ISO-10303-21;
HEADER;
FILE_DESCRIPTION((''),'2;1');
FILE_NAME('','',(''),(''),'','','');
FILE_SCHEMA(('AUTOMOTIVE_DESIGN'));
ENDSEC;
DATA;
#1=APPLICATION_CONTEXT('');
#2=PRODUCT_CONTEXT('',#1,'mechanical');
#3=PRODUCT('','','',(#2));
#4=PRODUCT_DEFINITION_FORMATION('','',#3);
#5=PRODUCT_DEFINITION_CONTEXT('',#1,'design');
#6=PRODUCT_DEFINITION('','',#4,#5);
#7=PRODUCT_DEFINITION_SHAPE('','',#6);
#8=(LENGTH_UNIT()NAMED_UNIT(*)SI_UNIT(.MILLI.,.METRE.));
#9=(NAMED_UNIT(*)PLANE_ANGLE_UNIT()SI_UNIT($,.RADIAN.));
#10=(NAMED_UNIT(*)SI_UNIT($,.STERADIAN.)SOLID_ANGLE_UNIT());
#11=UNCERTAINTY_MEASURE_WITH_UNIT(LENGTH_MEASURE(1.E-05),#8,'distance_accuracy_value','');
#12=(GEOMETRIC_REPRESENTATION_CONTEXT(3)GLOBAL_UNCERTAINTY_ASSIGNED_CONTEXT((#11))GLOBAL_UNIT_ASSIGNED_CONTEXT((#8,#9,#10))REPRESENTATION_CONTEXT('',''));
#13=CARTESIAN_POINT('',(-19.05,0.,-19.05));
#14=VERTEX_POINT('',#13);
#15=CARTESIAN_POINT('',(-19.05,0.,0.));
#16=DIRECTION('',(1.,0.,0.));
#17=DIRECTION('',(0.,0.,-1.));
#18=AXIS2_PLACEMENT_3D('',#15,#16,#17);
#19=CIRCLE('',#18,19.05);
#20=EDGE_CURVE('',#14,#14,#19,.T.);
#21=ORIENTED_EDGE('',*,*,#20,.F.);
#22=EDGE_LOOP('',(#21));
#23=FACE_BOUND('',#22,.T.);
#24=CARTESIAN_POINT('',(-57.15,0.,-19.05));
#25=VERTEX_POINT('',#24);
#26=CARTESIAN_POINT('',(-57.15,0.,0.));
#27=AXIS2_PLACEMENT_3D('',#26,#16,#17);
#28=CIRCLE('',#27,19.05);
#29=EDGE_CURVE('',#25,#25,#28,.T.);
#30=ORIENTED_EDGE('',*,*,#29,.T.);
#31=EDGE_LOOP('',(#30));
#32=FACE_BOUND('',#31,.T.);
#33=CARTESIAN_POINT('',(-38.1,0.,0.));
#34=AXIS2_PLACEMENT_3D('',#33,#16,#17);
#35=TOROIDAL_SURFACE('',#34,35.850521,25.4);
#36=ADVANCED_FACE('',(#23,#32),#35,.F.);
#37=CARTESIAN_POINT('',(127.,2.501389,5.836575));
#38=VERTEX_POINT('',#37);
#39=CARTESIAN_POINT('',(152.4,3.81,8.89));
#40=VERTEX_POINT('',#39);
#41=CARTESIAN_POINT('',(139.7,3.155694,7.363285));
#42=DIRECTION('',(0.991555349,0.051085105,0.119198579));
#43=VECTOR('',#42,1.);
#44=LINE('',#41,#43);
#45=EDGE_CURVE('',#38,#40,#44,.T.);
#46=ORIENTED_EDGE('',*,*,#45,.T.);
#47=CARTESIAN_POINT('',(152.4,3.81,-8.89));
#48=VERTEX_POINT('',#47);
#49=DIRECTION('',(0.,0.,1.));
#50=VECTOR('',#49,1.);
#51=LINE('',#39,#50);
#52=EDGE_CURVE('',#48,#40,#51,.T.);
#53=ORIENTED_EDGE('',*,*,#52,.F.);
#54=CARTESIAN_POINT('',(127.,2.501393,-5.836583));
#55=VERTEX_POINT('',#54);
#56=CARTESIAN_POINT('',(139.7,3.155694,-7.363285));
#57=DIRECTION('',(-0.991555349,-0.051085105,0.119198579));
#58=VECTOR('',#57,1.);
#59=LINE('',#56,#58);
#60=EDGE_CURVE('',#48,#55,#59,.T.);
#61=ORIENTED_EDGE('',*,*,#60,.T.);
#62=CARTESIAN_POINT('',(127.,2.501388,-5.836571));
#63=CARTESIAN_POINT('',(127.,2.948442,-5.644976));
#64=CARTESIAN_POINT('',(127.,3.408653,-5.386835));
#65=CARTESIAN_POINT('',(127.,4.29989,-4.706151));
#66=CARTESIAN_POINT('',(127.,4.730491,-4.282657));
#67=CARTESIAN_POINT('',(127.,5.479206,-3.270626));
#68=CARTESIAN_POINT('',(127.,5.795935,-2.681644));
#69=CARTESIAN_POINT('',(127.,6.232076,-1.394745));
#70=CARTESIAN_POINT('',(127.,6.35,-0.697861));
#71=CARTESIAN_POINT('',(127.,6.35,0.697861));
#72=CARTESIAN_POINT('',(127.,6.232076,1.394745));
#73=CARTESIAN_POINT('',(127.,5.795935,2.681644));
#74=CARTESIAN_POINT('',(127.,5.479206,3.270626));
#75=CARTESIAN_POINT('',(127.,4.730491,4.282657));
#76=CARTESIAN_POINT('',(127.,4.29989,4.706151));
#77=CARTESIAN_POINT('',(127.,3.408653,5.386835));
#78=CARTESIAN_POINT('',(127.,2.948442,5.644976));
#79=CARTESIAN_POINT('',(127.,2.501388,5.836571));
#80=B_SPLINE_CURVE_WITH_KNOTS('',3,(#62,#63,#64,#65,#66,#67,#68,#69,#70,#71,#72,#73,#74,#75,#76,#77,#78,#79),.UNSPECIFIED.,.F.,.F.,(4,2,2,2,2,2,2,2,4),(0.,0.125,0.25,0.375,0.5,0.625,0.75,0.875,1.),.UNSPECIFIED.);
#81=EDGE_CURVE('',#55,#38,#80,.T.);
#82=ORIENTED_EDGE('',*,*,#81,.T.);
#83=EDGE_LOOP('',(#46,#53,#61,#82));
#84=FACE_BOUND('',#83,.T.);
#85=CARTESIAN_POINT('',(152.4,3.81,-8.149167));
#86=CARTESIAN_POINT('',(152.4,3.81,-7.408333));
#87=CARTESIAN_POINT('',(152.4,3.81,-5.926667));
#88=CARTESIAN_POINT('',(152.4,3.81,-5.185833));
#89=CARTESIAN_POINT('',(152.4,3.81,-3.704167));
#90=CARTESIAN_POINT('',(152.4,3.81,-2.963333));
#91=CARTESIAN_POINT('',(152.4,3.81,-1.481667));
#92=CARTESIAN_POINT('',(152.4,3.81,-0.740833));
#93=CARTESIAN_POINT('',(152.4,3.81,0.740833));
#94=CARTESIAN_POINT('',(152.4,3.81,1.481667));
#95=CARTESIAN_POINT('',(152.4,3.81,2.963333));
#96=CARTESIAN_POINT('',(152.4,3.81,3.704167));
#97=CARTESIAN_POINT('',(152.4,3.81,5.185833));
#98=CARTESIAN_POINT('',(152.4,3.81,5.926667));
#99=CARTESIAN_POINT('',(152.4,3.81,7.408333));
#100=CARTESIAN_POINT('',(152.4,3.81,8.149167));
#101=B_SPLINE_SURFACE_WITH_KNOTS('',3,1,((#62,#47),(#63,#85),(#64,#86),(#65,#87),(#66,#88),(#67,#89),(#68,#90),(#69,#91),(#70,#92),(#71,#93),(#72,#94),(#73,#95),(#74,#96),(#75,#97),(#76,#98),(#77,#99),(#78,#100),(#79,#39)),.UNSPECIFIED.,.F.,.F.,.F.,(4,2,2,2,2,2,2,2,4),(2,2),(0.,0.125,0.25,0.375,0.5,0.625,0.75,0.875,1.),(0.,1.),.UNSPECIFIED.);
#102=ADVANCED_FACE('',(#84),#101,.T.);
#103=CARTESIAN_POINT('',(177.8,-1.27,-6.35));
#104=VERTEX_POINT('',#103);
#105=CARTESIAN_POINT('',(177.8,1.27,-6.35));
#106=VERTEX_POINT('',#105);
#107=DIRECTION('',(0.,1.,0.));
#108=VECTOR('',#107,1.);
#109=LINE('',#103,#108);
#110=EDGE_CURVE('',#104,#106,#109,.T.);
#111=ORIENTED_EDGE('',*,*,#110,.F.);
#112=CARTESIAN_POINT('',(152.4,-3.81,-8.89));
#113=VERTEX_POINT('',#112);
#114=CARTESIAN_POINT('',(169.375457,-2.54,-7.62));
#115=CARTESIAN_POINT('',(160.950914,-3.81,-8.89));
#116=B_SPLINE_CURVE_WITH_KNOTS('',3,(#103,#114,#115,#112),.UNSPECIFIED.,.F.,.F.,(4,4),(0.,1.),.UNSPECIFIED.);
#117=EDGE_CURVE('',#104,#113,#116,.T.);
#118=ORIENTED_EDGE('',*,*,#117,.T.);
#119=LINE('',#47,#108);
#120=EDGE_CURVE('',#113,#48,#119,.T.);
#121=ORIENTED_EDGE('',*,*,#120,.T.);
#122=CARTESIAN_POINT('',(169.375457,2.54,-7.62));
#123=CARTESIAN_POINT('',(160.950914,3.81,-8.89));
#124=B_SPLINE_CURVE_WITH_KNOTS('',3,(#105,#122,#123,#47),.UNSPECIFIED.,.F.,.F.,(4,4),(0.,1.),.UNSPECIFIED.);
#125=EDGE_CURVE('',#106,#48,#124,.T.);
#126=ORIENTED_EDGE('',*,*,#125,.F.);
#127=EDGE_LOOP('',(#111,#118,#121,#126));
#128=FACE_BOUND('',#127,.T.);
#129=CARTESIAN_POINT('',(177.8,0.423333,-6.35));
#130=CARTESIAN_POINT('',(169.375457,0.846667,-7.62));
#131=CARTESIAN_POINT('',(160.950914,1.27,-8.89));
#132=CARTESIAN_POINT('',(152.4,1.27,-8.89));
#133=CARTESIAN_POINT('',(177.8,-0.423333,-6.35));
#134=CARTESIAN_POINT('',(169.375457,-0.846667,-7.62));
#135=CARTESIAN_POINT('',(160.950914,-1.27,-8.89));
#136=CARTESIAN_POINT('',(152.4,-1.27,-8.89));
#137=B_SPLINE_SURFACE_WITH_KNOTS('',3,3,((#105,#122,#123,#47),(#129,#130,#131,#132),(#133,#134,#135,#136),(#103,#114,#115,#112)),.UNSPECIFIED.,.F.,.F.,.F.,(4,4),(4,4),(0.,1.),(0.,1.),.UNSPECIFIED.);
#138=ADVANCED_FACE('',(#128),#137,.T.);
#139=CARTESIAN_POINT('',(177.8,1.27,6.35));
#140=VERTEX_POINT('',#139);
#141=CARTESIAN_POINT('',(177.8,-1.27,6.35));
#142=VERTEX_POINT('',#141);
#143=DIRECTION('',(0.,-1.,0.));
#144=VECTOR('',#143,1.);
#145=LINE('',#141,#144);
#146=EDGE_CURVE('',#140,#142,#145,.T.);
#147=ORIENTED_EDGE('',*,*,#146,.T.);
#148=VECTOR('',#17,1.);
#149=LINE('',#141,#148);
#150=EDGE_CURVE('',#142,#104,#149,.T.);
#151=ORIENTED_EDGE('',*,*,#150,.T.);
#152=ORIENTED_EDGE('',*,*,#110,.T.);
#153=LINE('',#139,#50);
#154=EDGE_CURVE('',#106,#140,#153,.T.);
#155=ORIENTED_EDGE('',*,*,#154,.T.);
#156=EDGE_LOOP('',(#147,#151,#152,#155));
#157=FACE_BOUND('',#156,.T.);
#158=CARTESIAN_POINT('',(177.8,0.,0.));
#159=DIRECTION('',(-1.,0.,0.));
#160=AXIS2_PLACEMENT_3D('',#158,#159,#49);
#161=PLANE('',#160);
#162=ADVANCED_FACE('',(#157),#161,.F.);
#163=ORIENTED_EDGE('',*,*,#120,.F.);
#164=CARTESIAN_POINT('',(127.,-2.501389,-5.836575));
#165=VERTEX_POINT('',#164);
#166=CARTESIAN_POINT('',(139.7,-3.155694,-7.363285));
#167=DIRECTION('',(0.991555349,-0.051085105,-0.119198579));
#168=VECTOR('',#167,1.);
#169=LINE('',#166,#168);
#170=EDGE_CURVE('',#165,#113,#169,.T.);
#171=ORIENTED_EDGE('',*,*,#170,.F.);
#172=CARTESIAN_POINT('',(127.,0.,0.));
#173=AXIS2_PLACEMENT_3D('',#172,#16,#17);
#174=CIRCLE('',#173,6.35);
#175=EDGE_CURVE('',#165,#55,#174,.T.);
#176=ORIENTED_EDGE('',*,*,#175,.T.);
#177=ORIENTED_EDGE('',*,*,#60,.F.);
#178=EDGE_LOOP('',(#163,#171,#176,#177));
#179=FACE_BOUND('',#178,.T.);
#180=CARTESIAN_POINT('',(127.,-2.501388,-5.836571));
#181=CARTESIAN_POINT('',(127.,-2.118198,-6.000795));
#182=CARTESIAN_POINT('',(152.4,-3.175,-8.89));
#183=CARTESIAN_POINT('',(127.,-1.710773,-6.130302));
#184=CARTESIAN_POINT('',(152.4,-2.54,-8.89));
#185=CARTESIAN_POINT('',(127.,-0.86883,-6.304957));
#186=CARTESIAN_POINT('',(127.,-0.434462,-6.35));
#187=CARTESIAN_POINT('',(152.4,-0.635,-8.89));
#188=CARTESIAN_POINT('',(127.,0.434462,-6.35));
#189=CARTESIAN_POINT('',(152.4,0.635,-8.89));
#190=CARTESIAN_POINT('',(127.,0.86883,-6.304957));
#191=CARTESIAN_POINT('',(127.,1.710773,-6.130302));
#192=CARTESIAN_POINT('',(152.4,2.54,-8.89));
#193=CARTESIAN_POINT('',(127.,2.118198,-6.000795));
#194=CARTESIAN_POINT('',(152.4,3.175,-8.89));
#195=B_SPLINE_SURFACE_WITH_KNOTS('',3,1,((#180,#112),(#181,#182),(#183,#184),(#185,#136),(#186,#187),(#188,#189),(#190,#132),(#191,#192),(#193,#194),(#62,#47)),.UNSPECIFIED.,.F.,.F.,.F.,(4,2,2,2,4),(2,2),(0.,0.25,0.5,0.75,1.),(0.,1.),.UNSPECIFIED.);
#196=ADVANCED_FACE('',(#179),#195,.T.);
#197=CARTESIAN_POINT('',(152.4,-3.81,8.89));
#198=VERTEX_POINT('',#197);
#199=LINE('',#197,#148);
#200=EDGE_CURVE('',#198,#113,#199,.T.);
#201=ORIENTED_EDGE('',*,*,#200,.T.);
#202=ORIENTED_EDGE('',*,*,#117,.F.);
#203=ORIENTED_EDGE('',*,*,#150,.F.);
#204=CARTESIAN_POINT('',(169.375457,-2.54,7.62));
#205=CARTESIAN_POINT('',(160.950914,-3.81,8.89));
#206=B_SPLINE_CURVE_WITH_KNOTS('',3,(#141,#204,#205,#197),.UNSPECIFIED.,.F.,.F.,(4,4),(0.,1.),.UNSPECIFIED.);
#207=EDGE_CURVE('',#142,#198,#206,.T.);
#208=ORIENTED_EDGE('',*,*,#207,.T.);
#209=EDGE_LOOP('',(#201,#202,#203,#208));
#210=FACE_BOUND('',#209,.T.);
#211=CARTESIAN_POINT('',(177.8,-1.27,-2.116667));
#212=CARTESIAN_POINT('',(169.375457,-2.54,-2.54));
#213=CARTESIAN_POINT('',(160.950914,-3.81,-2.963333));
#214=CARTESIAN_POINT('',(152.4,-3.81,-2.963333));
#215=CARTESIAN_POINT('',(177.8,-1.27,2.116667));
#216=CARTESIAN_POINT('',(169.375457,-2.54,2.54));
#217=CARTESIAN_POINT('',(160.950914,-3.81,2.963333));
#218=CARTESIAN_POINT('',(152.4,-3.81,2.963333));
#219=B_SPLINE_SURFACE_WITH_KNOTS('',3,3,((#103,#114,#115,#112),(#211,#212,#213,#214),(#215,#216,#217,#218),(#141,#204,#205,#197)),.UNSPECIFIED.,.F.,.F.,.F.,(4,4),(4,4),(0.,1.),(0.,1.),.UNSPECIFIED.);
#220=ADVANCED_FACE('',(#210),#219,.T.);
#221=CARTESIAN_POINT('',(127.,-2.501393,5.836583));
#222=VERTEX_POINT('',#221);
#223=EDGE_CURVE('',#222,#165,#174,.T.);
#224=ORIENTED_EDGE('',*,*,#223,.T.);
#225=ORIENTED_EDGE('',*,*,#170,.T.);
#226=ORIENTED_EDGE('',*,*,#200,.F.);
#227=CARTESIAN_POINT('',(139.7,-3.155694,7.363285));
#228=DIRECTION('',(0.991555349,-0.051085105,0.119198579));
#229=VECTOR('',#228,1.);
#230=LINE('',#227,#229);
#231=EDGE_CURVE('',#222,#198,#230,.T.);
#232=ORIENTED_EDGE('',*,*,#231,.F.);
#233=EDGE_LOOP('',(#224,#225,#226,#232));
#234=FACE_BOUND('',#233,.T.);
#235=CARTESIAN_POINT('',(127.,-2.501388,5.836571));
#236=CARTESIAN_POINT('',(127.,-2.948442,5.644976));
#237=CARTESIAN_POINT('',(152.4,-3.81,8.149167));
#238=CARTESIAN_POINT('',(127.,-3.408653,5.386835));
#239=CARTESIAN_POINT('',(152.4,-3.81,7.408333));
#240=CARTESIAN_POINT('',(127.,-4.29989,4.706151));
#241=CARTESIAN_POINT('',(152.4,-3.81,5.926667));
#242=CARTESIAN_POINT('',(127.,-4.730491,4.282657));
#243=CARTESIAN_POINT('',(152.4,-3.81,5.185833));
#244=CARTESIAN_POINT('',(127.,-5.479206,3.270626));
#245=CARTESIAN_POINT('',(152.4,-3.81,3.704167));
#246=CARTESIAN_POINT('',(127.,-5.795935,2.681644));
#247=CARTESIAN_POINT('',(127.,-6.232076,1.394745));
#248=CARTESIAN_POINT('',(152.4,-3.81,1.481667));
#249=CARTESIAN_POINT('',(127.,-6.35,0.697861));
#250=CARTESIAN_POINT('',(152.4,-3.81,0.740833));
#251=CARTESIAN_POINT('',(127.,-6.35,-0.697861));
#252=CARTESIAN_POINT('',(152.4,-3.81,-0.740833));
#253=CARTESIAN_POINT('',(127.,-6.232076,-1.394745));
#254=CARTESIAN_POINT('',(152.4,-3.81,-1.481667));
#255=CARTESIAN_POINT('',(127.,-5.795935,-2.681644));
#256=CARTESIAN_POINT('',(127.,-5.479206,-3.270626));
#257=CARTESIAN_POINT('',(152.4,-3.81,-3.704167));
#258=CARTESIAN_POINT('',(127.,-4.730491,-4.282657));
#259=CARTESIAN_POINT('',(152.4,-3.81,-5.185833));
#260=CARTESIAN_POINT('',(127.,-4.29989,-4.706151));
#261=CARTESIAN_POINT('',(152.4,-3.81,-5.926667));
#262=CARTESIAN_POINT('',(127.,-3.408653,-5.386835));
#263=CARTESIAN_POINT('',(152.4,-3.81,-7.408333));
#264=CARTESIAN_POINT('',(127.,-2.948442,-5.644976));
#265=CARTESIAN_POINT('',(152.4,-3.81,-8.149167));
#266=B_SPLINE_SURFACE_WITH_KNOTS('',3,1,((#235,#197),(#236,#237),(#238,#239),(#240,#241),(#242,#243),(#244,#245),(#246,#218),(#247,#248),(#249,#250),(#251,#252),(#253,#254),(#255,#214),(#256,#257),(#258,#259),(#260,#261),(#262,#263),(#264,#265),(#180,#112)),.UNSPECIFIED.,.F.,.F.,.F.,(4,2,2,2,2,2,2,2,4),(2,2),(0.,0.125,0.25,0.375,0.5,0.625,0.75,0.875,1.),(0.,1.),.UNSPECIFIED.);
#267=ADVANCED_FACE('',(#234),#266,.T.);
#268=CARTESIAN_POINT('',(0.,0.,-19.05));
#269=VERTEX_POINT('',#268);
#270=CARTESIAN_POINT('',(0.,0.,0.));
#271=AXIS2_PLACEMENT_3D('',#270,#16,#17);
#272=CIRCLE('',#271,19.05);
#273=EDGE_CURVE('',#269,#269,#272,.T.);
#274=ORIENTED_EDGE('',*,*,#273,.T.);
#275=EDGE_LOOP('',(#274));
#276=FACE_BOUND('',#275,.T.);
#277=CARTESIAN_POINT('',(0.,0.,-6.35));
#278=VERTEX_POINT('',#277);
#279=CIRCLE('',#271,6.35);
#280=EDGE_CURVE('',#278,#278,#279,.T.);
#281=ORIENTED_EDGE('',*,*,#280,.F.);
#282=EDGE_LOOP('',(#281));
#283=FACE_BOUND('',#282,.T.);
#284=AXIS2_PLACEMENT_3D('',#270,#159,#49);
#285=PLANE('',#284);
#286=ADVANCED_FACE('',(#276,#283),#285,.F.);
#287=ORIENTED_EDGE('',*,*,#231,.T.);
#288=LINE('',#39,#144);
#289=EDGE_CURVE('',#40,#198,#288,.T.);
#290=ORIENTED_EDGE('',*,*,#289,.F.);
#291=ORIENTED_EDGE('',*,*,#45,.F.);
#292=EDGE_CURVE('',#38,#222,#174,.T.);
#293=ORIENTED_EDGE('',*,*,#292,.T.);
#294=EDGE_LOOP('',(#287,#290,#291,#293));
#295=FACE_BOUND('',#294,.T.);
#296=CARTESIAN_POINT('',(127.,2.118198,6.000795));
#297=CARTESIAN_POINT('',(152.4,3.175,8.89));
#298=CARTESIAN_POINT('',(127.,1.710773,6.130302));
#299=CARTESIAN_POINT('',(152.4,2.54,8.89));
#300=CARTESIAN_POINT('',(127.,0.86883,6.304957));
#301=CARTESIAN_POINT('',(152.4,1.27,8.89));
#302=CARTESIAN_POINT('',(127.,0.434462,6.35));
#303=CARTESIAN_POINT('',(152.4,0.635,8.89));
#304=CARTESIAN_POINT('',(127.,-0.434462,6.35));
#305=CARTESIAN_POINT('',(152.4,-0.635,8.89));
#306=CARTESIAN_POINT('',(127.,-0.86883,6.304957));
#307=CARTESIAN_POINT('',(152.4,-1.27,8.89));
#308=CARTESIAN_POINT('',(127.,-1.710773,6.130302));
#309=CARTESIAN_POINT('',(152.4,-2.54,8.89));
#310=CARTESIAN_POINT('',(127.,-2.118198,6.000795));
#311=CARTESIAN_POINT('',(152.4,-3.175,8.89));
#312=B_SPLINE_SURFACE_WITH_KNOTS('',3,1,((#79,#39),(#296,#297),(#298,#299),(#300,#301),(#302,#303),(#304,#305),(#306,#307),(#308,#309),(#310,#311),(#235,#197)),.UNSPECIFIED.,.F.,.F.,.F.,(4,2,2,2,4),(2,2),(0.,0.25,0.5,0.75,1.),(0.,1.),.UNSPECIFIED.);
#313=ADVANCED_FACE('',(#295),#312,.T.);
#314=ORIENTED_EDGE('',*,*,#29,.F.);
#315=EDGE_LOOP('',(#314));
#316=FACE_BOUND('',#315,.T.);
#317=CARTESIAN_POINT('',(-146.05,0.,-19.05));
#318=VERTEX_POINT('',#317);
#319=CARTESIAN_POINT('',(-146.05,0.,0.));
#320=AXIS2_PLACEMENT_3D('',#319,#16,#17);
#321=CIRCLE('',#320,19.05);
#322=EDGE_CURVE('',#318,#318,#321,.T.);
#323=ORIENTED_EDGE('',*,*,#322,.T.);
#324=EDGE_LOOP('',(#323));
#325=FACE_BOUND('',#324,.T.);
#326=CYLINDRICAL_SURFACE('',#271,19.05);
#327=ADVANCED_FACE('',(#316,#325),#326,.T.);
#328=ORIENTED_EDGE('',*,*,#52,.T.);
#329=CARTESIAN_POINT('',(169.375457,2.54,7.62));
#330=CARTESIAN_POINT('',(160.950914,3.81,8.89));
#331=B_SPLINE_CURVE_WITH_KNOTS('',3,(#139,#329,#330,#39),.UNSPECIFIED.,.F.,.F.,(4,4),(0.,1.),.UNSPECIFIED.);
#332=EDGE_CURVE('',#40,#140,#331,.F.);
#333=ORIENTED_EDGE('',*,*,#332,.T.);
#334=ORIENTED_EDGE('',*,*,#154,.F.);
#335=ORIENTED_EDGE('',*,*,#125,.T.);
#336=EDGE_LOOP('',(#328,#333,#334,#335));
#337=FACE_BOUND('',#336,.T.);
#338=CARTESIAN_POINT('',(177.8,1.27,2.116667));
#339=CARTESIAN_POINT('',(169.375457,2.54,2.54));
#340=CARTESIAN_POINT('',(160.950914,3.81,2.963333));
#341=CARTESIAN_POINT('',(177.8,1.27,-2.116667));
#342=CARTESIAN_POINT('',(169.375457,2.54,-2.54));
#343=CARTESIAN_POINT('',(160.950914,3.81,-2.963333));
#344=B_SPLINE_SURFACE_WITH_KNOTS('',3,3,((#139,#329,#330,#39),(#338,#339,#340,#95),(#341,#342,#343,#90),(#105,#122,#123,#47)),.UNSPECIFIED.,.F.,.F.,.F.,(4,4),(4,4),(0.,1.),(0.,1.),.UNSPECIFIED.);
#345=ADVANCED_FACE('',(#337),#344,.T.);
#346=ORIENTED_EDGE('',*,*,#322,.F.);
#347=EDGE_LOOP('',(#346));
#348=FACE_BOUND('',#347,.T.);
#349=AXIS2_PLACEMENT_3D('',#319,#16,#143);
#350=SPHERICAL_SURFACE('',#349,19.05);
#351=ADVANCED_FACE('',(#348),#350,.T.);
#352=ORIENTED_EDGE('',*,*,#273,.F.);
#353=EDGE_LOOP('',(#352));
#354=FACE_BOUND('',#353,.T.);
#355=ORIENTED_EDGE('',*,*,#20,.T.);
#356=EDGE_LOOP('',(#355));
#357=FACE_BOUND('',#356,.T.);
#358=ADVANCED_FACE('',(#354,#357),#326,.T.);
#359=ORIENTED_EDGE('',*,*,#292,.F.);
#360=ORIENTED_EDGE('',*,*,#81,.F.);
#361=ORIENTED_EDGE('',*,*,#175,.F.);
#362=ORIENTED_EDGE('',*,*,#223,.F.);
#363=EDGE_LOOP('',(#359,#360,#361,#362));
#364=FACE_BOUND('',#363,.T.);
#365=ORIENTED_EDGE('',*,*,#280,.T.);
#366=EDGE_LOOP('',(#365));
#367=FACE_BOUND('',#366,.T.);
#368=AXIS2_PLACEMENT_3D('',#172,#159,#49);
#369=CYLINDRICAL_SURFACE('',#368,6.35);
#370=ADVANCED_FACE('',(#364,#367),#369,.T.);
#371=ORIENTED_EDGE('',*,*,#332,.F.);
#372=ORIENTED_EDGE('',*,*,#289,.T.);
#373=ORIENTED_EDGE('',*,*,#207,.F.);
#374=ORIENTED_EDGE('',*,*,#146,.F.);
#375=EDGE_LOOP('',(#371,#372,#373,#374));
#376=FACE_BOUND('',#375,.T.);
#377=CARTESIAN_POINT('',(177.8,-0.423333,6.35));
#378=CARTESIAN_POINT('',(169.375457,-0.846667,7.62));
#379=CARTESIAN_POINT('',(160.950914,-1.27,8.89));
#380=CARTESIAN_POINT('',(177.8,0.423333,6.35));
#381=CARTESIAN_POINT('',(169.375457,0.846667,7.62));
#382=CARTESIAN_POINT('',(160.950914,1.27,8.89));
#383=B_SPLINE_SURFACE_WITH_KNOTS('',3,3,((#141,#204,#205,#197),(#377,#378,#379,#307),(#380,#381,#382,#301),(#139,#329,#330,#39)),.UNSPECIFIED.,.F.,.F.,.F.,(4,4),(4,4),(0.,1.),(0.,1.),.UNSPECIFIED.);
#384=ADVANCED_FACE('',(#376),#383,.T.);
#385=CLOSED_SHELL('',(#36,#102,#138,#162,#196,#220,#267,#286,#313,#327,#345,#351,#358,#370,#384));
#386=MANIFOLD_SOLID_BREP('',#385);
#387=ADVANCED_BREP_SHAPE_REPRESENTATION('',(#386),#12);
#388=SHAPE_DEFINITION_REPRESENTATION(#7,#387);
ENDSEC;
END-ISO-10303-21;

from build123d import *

# Parameters (mm, degrees)
SKETCH6_R           = 6.35
BOSS_EXTRUDE1_DEPTH = 127
LOFT6_START         = -6.35
LOFT6_DEPTH         = 12.6999999
LOFT6_START_2       = -3.8100001
LOFT6_2_DEPTH       = 7.6200001
LOFT6_START_3       = -10
LOFT6_3_DEPTH       = 20


with BuildPart() as part:
    # Sketch3 → Revolve2 (revolve)
    with BuildSketch(Plane(origin=(0, 0, 0), x_dir=(0, 1, 0), z_dir=(0, 0, 1)), mode=Mode.PRIVATE) as revolve2_sk:
        with BuildLine():
            ThreePointArc((19.05, 57.15), (10.450520825, 38.1), (19.05, 19.05))
            Line((19.05, 19.05), (19.05, 0))
            Line((19.05, 0), (0, 0))
            Line((0, 0), (0, 165.1))
            ThreePointArc((0, 165.1), (13.470384182, 159.520384182), (19.05, 146.05))
            Line((19.05, 146.05), (19.05, 57.15))
        make_face()
    revolve(revolve2_sk.sketch.rotate(Axis((0, 0, 0), (-1, 0, 0)), 90), axis=Axis((0, 0, 0), (-1, 0, 0)))

    # Sketch6 → Boss-Extrude1 (add)
    with BuildSketch(Plane.YZ):
        with Locations(Location((0, 0, 0), (0, 0, 270))):
            Circle(SKETCH6_R)
    extrude(amount=BOSS_EXTRUDE1_DEPTH)

    # Sketch7 for Loft5 → Loft5 section 0
    with BuildSketch(Plane(origin=(127, 0, 0), x_dir=(0, 0, -1), z_dir=(1, 0, 0))):
        with BuildLine():
            # circular arc as an exact rational Bezier (weights 1, cos(half-angle), 1)
            Bezier((-5.836570941, 2.501387546), (0, 16.120053073), (5.836570941, 2.501387546), weights=[1, 0.393919299, 1])
            Bezier((5.836570941, 2.501387546), (6.908594174, 0), (5.836570941, -2.501387546), weights=[1, 0.91914503, 1])
            Bezier((5.836570941, -2.501387546), (0, -16.120053073), (-5.836570941, -2.501387546), weights=[1, 0.393919299, 1])
            Bezier((-5.836570941, -2.501387546), (-6.908594174, 0), (-5.836570941, 2.501387546), weights=[1, 0.91914503, 1])
        make_face()
    # Sketch4 → Loft5 section 1
    with BuildSketch(Plane(origin=(152.4, 0, 0), x_dir=(0, 0, -1), z_dir=(1, 0, 0))):
        with BuildLine():
            Line((-8.89, 3.81), (8.89, 3.81))
            Line((8.89, 3.81), (8.89, -3.81))
            Line((8.89, -3.81), (-8.89, -3.81))
            Line((-8.89, -3.81), (-8.89, 3.81))
        make_face()
    loft()

    # Loft6: read off the stored shape, not the designer's step
    # Loft6 outline → Loft6 (add)
    with BuildSketch(Plane.XY.offset(LOFT6_START)):
        with BuildLine():
            Line((177.8, -1.27), (177.8, 1.27))
            add(Edge.make_bspline(
                [(177.8, 1.27), (169.375457091, 2.54), (160.950914181, 3.81), (152.4, 3.81)],
                knots=[0, 0, 0, 0, 1, 1, 1, 1], degree=3))
            Line((152.4, 3.81), (152.4, -3.81))
            add(Edge.make_bspline(
                [(177.8, -1.27), (169.375457091, -2.54), (160.950914181, -3.81), (152.4, -3.81)],
                knots=[0, 0, 0, 0, 1, 1, 1, 1], degree=3))
        make_face()
    extrude(amount=LOFT6_DEPTH)

    # Loft6 2 outline → Loft6 2 (add)
    with BuildSketch(Plane(origin=(0, 0, 0), x_dir=(1, 0, 0), z_dir=(0, 1, 0)).offset(LOFT6_START_2)):
        with BuildLine():
            Line((152.4, 6.35), (177.8, 6.35))
            add(Edge.make_bspline(
                [(177.8, 6.35), (169.375457091, 7.62), (160.950914181, 8.89), (152.4, 8.89)],
                knots=[0, 0, 0, 0, 1, 1, 1, 1], degree=3))
            Line((152.4, 8.89), (152.4, 6.35))
        make_face()
        with BuildLine():
            add(Edge.make_bspline(
                [(177.8, -6.35), (169.375457091, -7.62), (160.950914181, -8.89), (152.4, -8.89)],
                knots=[0, 0, 0, 0, 1, 1, 1, 1], degree=3))
            Line((177.8, -6.35), (152.4, -6.3499999))
            Line((152.4, -6.3499999), (152.4, -8.89))
        make_face()
    extrude(amount=LOFT6_2_DEPTH)

    # Loft6 3 outline → Loft6 3 (cut)
    with BuildSketch(Plane.XY.offset(LOFT6_START_3)):
        with BuildLine():
            add(Edge.make_bspline(
                [(177.8, 1.27), (169.375457091, 2.54), (160.950914181, 3.81), (152.4, 3.81)],
                knots=[0, 0, 0, 0, 1, 1, 1, 1], degree=3))
            Line((177.8, 1.27), (177.8, 3.81))
            Line((177.8, 3.81), (152.4, 3.81))
        make_face()
        with BuildLine():
            add(Edge.make_bspline(
                [(177.8, -1.27), (169.375457091, -2.54), (160.950914181, -3.81), (152.4, -3.81)],
                knots=[0, 0, 0, 0, 1, 1, 1, 1], degree=3))
            Line((152.4, -3.81), (177.8, -3.8100001))
            Line((177.8, -3.8100001), (177.8, -1.27))
        make_face()
    extrude(amount=LOFT6_3_DEPTH, mode=Mode.SUBTRACT)


solid = part.part
